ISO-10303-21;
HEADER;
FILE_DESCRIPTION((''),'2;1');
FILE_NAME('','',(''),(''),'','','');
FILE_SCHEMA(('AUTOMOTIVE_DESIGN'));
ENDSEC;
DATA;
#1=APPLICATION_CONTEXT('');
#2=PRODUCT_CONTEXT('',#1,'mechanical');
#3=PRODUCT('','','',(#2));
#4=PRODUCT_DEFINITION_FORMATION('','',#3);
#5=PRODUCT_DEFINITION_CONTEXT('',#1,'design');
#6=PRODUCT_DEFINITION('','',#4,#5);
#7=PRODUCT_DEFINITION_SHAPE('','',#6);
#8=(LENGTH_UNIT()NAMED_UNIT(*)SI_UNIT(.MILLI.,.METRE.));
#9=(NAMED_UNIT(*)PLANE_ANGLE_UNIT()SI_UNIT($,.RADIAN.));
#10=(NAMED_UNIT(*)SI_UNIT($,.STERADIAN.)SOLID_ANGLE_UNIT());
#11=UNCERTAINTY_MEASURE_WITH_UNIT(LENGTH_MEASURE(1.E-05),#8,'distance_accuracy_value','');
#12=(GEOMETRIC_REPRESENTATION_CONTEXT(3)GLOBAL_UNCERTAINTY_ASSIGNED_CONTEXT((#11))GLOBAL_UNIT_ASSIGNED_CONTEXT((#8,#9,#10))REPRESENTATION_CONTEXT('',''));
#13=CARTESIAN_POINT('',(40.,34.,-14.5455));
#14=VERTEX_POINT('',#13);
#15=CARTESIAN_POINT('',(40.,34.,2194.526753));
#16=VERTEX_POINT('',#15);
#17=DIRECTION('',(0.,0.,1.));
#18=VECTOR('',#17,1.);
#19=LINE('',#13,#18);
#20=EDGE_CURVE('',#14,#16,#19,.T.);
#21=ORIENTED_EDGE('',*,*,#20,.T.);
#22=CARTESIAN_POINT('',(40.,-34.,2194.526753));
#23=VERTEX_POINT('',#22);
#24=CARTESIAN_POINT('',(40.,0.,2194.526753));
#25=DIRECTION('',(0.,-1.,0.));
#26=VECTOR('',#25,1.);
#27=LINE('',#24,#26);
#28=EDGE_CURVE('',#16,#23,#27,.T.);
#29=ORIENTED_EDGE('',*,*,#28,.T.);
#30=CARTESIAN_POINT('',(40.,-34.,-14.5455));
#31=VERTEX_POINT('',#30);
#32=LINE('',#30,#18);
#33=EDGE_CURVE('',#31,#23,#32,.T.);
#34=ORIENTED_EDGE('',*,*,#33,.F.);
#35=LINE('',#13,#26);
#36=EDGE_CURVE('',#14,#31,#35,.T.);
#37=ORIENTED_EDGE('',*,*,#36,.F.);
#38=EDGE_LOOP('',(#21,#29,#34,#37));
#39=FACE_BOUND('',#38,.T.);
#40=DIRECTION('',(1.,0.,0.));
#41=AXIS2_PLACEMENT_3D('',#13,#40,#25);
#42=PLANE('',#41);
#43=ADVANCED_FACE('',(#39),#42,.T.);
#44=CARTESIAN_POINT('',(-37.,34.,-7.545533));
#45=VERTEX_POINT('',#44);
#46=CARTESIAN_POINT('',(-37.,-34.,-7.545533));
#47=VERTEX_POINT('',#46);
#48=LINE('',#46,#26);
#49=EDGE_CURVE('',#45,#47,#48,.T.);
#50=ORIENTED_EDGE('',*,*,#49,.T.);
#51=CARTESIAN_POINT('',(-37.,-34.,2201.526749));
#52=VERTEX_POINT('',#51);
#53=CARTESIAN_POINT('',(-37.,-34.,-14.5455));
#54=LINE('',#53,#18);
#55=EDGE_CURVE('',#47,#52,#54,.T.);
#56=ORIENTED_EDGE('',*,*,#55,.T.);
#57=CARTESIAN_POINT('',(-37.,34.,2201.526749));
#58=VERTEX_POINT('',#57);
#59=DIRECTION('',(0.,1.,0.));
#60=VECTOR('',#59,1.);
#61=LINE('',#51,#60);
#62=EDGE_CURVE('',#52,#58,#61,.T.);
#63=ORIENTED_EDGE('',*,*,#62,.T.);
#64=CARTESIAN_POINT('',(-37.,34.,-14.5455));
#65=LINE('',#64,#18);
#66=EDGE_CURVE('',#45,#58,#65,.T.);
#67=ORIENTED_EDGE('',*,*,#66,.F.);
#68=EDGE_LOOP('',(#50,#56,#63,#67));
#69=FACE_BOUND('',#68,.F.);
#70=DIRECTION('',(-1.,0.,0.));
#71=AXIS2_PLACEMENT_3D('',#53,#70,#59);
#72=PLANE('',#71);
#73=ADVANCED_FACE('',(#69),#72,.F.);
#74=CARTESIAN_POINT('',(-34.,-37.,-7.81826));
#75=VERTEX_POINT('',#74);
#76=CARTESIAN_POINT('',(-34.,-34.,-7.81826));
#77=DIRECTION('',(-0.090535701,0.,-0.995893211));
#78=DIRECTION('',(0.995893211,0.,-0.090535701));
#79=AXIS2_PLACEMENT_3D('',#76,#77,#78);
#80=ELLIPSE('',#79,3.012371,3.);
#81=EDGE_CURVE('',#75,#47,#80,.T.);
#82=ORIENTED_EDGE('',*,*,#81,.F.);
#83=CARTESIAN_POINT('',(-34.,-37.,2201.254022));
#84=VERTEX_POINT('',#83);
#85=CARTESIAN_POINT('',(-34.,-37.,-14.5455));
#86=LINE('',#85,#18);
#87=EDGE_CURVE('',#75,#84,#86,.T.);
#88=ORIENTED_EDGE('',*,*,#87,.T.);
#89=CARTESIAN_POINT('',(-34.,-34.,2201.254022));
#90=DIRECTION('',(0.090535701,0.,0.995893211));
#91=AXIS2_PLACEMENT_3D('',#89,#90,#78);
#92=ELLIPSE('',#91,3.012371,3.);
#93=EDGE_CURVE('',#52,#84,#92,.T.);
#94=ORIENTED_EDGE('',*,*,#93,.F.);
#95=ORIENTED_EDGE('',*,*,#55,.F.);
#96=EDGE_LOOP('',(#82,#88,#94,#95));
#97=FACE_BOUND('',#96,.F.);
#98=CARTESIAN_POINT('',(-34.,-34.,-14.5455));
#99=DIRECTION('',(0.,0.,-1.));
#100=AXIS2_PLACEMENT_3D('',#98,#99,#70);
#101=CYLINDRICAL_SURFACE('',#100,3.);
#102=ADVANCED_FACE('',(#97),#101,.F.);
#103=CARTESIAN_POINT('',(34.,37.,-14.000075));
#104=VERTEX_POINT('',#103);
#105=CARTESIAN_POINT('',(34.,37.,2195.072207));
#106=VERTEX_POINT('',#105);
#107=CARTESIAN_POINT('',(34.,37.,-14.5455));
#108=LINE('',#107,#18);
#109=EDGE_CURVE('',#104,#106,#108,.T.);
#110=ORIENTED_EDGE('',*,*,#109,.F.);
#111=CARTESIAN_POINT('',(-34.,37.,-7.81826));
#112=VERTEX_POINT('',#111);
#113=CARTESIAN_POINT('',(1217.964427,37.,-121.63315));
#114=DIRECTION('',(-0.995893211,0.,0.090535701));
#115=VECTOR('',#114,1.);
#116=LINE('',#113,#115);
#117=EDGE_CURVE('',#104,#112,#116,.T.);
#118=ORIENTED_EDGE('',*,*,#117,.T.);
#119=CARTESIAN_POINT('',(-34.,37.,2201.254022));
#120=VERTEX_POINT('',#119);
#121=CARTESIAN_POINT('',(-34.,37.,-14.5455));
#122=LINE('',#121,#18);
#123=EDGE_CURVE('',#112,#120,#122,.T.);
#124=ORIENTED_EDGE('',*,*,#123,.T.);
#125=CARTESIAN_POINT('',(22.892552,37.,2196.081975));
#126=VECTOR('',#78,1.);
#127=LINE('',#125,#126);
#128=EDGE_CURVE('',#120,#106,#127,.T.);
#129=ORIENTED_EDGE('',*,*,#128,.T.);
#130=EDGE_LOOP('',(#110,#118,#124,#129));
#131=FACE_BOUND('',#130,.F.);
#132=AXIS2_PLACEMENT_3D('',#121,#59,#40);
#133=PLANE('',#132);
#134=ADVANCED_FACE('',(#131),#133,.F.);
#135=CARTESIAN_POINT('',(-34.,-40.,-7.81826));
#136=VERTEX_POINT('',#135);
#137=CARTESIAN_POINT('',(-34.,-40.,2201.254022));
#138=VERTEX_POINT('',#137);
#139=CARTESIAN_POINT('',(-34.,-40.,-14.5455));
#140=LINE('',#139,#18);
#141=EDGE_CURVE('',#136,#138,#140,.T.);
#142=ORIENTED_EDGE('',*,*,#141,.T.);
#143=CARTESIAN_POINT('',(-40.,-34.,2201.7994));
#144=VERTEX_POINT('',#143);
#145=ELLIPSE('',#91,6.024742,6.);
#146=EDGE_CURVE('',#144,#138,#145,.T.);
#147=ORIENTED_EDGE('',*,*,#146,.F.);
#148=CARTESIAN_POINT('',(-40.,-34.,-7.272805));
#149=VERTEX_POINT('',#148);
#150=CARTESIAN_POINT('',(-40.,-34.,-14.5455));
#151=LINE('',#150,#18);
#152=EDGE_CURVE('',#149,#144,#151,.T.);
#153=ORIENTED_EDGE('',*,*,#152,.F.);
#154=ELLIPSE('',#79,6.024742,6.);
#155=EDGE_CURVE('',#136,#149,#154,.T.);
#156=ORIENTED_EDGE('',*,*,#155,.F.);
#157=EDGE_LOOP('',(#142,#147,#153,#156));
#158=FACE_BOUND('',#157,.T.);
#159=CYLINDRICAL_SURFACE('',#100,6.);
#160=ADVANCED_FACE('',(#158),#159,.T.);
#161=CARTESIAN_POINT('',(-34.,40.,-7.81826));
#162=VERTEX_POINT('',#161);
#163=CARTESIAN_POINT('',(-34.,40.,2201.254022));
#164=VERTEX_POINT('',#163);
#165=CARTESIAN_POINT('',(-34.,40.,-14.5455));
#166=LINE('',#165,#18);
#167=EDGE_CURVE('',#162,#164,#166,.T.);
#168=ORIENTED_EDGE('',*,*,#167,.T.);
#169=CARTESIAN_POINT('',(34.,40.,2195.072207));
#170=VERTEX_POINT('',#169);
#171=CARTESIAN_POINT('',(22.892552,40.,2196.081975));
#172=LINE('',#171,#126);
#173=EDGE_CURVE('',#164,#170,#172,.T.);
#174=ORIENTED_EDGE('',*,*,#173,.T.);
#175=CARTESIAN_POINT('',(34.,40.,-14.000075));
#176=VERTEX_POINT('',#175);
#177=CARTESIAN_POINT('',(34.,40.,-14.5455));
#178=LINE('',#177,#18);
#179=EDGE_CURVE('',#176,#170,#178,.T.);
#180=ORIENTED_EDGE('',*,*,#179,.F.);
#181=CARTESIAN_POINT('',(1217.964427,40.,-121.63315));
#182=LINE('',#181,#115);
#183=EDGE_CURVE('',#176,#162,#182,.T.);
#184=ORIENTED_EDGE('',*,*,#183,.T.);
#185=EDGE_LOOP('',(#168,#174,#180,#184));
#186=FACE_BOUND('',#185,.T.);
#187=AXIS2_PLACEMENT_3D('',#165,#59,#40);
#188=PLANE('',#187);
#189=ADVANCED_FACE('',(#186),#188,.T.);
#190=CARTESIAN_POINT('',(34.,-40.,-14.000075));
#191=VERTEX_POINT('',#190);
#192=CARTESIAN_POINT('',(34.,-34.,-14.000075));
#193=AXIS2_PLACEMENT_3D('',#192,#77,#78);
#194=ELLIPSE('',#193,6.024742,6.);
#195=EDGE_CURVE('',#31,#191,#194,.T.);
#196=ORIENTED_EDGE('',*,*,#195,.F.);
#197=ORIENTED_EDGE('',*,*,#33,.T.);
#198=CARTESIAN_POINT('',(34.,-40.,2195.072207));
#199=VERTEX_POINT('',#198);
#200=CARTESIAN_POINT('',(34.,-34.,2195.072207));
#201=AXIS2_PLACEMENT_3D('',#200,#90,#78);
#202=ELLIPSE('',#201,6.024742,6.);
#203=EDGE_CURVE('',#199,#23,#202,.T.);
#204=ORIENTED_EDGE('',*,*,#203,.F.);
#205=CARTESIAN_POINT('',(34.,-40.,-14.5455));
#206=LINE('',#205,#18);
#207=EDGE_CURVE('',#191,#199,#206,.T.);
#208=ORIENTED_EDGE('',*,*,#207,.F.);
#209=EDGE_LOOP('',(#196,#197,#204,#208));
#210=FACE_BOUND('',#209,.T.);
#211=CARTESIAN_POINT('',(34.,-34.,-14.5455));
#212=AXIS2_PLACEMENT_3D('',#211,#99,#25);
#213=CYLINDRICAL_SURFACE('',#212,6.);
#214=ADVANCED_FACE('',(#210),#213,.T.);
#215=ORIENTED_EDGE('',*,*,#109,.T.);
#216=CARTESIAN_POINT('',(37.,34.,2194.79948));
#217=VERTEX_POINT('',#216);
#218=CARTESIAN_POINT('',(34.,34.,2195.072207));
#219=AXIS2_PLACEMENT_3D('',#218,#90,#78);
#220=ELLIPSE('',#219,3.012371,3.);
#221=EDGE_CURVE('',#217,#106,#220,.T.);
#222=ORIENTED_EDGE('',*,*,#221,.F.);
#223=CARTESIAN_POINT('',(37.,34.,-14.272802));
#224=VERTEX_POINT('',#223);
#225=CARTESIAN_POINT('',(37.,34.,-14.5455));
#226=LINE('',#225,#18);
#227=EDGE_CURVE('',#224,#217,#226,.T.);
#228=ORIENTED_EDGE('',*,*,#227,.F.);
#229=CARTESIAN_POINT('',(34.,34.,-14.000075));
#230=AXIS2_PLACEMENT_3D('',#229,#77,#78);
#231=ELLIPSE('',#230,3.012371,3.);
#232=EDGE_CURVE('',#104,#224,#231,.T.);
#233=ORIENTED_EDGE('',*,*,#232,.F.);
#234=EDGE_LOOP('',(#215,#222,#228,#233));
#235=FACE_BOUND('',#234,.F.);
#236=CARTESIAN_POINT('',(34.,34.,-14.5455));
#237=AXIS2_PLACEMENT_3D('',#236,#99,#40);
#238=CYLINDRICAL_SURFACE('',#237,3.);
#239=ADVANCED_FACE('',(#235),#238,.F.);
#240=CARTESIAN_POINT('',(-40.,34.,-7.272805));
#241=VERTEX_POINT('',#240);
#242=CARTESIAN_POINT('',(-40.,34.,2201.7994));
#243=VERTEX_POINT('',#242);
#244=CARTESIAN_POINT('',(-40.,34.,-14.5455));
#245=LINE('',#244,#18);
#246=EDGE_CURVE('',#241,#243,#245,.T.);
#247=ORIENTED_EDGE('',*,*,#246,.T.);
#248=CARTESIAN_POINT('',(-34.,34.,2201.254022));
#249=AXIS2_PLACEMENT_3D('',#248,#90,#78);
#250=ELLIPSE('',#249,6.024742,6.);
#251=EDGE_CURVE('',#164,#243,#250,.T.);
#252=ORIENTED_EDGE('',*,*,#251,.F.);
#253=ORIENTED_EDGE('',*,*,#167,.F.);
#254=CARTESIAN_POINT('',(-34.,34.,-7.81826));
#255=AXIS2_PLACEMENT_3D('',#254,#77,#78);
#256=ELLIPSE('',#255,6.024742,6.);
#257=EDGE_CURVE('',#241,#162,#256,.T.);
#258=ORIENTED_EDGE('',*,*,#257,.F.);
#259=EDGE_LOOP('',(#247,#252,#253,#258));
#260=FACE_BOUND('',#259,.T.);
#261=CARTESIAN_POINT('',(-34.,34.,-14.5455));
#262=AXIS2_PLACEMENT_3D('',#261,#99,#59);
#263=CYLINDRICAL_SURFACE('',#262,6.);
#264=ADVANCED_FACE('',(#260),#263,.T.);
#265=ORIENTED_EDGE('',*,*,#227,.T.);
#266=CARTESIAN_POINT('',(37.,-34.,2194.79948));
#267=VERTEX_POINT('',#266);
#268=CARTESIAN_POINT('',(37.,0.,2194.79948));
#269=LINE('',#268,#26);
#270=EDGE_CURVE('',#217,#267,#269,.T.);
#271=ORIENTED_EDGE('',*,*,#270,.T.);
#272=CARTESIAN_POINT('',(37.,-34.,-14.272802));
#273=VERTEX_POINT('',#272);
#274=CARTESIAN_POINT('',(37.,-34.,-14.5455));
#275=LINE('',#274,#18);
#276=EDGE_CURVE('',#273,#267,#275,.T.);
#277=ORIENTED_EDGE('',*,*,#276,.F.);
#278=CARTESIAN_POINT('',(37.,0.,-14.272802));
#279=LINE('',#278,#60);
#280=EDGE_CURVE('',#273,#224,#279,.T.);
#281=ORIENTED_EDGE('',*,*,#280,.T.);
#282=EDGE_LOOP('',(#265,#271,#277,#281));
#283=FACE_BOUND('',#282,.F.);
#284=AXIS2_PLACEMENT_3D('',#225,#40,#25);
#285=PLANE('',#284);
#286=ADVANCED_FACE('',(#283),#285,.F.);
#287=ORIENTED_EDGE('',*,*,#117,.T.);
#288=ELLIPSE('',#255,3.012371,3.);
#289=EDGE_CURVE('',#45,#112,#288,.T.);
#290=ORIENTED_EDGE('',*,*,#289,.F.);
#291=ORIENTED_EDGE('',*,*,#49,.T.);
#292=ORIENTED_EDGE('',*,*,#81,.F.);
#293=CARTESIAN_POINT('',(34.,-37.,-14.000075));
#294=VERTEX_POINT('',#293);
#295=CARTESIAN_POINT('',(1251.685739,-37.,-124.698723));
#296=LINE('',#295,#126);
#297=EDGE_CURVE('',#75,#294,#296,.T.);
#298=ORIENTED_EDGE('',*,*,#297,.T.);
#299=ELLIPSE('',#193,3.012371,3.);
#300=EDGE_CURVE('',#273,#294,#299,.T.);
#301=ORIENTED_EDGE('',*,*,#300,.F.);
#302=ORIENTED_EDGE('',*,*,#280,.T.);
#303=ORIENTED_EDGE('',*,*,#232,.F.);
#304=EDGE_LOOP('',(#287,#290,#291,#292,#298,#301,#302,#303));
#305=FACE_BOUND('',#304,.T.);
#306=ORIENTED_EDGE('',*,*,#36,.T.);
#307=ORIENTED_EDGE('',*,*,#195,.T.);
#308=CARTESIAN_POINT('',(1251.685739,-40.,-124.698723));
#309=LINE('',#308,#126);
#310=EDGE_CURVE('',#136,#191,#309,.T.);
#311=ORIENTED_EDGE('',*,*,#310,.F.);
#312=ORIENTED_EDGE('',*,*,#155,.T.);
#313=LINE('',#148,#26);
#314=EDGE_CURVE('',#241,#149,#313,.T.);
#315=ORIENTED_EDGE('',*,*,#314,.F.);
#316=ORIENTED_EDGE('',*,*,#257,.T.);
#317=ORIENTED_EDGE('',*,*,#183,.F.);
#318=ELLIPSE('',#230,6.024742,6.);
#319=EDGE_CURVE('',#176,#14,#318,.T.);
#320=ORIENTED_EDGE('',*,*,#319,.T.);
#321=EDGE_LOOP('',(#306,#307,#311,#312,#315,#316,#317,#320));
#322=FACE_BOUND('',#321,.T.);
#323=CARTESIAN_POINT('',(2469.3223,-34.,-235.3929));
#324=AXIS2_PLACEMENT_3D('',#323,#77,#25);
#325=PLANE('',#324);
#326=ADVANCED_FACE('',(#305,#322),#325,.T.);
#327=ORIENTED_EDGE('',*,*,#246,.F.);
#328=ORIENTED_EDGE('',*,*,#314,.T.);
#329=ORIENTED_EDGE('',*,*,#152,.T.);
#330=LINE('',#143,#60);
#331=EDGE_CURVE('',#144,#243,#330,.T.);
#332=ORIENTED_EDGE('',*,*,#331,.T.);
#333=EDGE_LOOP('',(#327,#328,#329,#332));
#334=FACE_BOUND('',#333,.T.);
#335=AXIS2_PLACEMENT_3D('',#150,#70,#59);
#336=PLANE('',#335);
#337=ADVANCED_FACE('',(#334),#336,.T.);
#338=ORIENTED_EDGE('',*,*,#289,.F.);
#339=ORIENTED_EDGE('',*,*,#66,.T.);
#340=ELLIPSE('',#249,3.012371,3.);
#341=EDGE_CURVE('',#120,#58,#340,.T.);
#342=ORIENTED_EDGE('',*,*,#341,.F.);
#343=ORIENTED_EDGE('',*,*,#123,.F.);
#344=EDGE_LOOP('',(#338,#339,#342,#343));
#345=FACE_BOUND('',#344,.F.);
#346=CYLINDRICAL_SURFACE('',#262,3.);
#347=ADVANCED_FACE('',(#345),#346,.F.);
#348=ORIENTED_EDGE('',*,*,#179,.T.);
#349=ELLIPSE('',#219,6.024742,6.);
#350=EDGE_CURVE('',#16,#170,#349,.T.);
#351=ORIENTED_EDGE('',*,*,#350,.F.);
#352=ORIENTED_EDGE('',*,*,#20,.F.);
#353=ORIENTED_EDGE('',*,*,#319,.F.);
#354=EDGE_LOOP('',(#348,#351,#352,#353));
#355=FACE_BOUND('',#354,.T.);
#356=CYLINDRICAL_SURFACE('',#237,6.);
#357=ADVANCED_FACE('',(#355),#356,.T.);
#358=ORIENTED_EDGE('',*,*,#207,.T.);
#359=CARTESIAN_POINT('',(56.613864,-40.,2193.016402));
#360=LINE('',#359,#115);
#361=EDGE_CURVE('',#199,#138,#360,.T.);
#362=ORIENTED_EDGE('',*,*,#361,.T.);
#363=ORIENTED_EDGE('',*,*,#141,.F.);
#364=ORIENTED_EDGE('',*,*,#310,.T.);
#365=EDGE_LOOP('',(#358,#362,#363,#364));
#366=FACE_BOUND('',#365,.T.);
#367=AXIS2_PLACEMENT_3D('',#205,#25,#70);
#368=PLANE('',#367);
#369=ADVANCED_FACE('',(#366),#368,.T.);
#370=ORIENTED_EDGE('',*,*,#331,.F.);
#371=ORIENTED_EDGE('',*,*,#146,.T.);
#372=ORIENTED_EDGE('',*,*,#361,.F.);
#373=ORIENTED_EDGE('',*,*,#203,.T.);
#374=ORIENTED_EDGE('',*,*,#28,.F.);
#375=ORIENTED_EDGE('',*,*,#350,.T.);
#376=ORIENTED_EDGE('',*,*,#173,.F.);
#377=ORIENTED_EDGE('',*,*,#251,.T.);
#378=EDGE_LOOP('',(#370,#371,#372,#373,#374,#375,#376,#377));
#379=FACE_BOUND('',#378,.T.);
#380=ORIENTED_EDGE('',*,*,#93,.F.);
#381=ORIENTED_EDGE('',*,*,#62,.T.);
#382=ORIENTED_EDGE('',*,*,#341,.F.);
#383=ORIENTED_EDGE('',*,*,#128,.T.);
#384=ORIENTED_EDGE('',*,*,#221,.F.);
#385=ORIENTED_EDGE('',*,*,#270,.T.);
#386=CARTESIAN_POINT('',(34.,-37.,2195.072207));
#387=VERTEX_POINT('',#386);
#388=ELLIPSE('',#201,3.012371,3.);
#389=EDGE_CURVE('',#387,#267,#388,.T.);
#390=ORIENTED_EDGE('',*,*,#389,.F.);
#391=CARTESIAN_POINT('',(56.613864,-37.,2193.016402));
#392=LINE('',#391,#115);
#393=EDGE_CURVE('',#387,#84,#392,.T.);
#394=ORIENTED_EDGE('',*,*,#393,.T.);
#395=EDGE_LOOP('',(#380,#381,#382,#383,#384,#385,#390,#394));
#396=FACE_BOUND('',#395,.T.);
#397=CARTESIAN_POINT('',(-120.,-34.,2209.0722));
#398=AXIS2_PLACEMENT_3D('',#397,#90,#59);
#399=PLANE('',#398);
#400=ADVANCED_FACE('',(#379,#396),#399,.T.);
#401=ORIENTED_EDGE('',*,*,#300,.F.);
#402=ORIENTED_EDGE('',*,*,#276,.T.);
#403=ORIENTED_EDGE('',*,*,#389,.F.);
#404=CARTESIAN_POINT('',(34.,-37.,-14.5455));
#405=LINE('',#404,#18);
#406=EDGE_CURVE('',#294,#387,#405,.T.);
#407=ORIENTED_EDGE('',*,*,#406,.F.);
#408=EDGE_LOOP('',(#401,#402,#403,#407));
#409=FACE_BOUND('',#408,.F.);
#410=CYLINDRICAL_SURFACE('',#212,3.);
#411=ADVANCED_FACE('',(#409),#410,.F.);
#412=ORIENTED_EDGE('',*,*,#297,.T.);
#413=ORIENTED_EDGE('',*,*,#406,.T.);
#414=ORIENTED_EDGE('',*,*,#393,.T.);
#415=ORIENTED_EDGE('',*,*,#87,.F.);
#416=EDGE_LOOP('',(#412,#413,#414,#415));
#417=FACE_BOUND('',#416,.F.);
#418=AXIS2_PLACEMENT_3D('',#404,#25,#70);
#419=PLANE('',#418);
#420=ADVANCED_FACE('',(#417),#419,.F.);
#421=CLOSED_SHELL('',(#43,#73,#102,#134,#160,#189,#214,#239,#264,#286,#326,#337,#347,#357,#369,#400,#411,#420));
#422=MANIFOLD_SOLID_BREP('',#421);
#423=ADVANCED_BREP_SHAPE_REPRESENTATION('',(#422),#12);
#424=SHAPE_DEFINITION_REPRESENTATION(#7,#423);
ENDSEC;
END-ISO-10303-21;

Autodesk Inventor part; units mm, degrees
ref_plane "Start Plane" through (0, 0, -14.5455) normal (0, 0, 1) x (1, 0, 0)
ref_plane "End Plane" through (0, 0, 2201.7995) normal (0, 0, 1) x (1, 0, 0)
sketch "Sketch" plane through (0, 0, 0) normal (0, 0, 1) x (1, 0, 0)
  line L0 (-40, -34) -> (-40, 34)
  line L1 (-34, 40) -> (34, 40)
  line L2 (40, 34) -> (40, -34)
  line L3 (34, -40) -> (-34, -40)
  arc A0 (-40, -34) -> (-34, -40) centre (-34, -34) ccw
  arc A1 (40, 34) -> (34, 40) centre (34, 34) ccw
  arc A2 (-34, 40) -> (-40, 34) centre (-34, 34) ccw
  arc A3 (34, -40) -> (40, -34) centre (34, -34) ccw
  arc A4 (-34, 37) -> (-37, 34) centre (-34, 34) ccw
  line L4 (-34, 37) -> (34, 37)
  arc A5 (37, 34) -> (34, 37) centre (34, 34) ccw
  line L5 (37, 34) -> (37, -34)
  arc A6 (34, -37) -> (37, -34) centre (34, -34) ccw
  line L6 (34, -37) -> (-34, -37)
  arc A7 (-37, -34) -> (-34, -37) centre (-34, -34) ccw
  line L7 (-37, -34) -> (-37, 34)
  line L8 (0, 57.7397) -> (0, -57.7397) construction
  line L9 (-57.7397, 0) -> (57.7397, 0) construction
  dimension "d7" = 6
  dimension "d9" = 80
  dimension "d11" = 80
  dimension "d12" = 3
  dimension "d15" = 40
  dimension "d16" = 40
extrude "Body" add sketch "Sketch" along normal up to surface (2216.3449 mm away) from surface at -14.5455
sketch "Sketch3" plane through (0, 0, 0) normal (0, 0, 1) x (1, 0, 0)
  line L0 (0, 0) -> (10, 0)
ref_plane "Work Plane3" through (0, 0, 0) normal (0, -1, 0) x (1, 0, 0)
ref_plane "Work Plane4" through (-120, -34, 2209.0722) normal (0.0905357, 0, 0.9958932) x (0.9958932, 0, -0.0905357)
split "Split1" plane through (-120, -34, 2209.0722) removes the side toward (0.0905357, 0, 0.9958932)
ref_plane "Work Plane5" through (2469.3223, -34, -235.3929) normal (-0.0905357, 0, -0.9958932) x (-0.9958932, 0, 0.0905357)
split "Split2" plane through (2469.3223, -34, -235.3929) removes the side toward (-0.0905357, 0, -0.9958932)
sketch "Sketch4" plane through (0, 0, 0) normal (0, -1, 0) x (1, 0, 0)
  line L0 (-2, -14.5455) -> (12, -14.5455) projected
  line L1 (-2, 2201.7995) -> (12, 2201.7995) projected
  dimension "d18" = 2216.3449
equation "\"d7\" = G_IR"
equation "\"d9\" = G_W"
equation "\"d11\" = G_H"
equation "\"d12\" = G_T"
equation "\"d15\" = 0.5 * d9"
equation "\"d16\" = 0.5 * d11"
equation "\"d3\" = G_L"
equation "\"G_W\" = 80"
equation "\"G_H\" = 80"
equation "\"G_T\" = 3"
equation "\"G_IR\" = 6"
equation "\"G_L\" = d18"
equation "\"G_OFFSET_START\" = 14.54545"
equation "\"G_OFFSET_END\" = -7.27273"
equation "\"d13\" = -G_OFFSET_START"
equation "\"d14\" = G_OFFSET_END + B_L"
equation "\"B_L\" = 2209.0722"
properties part number "ISO 10799-2 - 80x80x3 - 2216,34" material "Steel, Mild"
